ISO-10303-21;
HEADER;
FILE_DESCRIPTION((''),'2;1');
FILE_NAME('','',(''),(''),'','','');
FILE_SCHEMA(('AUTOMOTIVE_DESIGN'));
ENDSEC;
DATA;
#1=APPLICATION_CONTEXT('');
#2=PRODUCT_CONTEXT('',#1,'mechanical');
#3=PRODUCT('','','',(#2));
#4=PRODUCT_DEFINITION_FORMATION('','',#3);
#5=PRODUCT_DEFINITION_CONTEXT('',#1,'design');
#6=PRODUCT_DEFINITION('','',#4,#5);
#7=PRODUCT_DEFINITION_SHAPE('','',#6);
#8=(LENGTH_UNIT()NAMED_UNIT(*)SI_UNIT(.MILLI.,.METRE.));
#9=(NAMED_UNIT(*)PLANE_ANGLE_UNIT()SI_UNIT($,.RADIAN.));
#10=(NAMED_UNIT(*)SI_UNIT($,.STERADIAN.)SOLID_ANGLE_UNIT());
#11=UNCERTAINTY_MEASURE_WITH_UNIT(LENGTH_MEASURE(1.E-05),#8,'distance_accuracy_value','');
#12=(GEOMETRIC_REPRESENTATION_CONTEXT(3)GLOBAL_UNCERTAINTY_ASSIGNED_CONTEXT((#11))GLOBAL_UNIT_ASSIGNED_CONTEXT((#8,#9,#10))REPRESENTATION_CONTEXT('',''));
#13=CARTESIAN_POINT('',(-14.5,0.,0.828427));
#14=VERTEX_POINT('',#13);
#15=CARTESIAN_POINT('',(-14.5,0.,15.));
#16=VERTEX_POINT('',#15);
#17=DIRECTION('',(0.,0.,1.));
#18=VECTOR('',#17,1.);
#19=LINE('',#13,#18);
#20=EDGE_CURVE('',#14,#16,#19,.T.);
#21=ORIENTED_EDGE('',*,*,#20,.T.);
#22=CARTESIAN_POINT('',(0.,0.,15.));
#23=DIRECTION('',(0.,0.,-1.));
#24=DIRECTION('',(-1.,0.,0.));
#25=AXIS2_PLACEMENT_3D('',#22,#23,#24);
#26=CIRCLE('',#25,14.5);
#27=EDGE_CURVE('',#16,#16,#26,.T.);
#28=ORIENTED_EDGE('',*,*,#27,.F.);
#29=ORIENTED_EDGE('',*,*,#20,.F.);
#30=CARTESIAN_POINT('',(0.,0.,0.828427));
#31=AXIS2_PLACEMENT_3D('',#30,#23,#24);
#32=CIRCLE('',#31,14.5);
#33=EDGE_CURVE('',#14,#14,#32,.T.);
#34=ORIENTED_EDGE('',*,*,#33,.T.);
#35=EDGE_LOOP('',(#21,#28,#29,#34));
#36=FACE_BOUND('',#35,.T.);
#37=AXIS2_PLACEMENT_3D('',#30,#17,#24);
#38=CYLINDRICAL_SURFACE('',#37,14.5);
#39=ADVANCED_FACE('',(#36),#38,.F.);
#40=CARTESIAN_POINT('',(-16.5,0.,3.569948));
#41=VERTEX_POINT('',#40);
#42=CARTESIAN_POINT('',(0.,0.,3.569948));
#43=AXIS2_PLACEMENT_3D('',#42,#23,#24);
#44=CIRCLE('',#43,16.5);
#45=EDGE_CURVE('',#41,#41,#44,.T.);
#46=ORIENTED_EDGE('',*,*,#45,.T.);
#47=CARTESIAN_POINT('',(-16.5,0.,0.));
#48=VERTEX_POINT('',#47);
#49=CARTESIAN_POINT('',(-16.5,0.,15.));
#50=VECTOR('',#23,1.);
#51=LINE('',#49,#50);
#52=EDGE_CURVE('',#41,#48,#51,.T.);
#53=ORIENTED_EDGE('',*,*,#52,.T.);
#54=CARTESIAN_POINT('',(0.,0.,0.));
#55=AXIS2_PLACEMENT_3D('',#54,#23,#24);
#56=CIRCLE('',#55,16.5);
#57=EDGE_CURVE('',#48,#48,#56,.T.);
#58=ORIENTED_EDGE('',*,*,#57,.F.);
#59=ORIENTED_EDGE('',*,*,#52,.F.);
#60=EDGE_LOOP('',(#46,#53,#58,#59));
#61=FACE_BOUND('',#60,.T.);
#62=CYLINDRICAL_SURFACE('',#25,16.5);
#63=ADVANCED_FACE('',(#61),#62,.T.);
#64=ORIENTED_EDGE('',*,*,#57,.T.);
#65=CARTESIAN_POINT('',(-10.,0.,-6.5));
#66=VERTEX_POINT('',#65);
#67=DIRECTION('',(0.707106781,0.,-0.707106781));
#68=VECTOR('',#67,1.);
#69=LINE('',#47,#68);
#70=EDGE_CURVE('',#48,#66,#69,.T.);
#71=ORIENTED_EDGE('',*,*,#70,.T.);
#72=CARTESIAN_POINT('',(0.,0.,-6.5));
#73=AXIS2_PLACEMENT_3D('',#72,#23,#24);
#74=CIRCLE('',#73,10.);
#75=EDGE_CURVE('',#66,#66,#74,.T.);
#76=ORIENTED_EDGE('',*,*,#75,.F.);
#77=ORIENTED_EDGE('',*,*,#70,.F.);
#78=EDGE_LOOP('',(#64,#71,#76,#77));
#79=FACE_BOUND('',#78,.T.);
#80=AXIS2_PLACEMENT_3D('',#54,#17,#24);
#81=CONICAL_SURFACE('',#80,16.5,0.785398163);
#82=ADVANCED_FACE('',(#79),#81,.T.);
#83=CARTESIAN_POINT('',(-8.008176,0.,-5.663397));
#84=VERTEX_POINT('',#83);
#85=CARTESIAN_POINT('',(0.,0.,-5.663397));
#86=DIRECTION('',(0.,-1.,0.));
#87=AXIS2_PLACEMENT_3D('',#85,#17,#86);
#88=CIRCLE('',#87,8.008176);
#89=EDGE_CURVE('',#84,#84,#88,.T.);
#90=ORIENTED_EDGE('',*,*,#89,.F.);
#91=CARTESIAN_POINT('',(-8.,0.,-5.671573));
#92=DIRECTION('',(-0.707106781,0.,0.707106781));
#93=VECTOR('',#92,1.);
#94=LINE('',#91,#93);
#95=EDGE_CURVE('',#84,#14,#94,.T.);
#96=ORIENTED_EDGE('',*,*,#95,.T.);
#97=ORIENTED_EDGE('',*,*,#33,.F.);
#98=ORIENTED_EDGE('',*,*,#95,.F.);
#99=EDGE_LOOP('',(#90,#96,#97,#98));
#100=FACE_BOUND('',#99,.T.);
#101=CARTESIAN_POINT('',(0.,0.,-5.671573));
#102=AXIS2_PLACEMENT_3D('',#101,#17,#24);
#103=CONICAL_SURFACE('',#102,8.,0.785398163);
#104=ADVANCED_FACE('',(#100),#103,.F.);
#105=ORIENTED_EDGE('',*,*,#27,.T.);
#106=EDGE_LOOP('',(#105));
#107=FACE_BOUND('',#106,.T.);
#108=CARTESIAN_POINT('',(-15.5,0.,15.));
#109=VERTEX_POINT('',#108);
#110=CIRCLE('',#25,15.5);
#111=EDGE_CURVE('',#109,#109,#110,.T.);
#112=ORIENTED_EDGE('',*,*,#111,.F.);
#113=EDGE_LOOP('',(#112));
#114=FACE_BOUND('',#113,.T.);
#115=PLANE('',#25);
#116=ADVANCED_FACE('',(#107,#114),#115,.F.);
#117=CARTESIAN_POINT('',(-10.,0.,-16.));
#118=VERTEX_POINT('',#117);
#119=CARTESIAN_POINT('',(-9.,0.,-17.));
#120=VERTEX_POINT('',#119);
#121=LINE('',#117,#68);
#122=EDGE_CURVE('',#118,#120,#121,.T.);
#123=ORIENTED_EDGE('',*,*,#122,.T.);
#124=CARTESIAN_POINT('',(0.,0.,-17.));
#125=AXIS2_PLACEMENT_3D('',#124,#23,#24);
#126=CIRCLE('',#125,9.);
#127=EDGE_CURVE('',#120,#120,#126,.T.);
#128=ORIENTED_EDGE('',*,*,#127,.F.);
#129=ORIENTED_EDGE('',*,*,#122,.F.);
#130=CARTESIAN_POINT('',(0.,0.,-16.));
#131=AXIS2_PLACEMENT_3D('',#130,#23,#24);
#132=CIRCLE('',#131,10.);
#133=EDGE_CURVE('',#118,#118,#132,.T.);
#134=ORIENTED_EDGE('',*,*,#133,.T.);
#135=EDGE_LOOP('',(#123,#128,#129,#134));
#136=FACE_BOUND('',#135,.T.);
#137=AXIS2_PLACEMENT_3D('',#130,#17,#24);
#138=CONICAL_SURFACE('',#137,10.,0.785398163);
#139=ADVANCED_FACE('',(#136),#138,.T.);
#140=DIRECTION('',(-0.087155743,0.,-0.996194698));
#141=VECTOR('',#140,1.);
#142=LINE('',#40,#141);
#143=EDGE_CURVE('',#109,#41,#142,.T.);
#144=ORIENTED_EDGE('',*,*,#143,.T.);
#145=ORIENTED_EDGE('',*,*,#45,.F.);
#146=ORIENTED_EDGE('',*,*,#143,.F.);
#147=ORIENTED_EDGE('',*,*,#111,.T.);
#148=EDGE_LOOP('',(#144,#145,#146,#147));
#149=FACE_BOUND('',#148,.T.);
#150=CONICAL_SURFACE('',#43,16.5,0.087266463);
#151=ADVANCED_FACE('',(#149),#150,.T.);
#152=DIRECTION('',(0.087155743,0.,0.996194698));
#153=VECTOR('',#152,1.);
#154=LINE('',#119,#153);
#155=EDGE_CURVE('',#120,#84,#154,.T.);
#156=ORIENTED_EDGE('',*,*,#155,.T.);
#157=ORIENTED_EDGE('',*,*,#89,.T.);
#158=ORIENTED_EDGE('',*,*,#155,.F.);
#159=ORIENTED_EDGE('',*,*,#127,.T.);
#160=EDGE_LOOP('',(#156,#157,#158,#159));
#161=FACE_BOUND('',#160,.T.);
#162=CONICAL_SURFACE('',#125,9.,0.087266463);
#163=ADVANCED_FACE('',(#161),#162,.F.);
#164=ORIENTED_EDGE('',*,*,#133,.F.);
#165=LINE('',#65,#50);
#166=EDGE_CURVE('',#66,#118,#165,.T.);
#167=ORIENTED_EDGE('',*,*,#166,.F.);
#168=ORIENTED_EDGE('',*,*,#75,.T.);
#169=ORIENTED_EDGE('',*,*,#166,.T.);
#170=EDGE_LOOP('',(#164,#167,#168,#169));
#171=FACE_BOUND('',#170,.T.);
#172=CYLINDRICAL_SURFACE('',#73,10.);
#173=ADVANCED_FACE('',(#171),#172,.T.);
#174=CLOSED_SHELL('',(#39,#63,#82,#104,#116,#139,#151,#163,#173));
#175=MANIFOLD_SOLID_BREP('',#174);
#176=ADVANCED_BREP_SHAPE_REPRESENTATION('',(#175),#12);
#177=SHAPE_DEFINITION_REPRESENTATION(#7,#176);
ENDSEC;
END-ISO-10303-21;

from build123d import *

# Parameters (mm, degrees)
F2_SIZE2 = 11.4300523028
F2_SIZE  = 1
F3_SIZE  = 1


# Not quite as in the source:
# - a fillet or chamfer that OpenCascade refuses, or shapes differently, is made with other operations: its cross-section is extruded or revolved along the edge and cut away or added


with BuildPart() as f1:
    # F0 (on Front) → F1 (revolve)
    with BuildSketch(Plane.XZ):
        Polygon((-14.5, 15), (-16.5, 15), (-16.5, 0), (-10, -6.5), (-10, -17), (-8, -17), (-8, -5.6715728753), (-14.5, 0.8284271247), align=None)
    revolve(axis=Axis((0, 0, 0.14814813), (0, 0, -1)))

    # F2
    f2_edges = [f1.edges().sort_by_distance(p)[0] for p in [
        (16.5, 0, 15),
    ]]
    chamfer(f2_edges, length=F2_SIZE, length2=F2_SIZE2)

    # F3
    f3_edges = [f1.edges().sort_by_distance(p)[0] for p in [
        (10, 0, -17),
    ]]
    chamfer(f3_edges, length=F3_SIZE)

    # F4: chamfer of 1 x 11.4300523028 on 1 edges, made by hand

    # F4_s1 → F4_t2 (revolve, cut)
    with BuildSketch(Plane.XZ):
        Polygon((-9, -17), (-8, -5.5699476972), (-8, -17), align=None)
    revolve(axis=Axis((0, 0, -17), (0, 0, -1)), mode=Mode.SUBTRACT)


solid = f1.part
